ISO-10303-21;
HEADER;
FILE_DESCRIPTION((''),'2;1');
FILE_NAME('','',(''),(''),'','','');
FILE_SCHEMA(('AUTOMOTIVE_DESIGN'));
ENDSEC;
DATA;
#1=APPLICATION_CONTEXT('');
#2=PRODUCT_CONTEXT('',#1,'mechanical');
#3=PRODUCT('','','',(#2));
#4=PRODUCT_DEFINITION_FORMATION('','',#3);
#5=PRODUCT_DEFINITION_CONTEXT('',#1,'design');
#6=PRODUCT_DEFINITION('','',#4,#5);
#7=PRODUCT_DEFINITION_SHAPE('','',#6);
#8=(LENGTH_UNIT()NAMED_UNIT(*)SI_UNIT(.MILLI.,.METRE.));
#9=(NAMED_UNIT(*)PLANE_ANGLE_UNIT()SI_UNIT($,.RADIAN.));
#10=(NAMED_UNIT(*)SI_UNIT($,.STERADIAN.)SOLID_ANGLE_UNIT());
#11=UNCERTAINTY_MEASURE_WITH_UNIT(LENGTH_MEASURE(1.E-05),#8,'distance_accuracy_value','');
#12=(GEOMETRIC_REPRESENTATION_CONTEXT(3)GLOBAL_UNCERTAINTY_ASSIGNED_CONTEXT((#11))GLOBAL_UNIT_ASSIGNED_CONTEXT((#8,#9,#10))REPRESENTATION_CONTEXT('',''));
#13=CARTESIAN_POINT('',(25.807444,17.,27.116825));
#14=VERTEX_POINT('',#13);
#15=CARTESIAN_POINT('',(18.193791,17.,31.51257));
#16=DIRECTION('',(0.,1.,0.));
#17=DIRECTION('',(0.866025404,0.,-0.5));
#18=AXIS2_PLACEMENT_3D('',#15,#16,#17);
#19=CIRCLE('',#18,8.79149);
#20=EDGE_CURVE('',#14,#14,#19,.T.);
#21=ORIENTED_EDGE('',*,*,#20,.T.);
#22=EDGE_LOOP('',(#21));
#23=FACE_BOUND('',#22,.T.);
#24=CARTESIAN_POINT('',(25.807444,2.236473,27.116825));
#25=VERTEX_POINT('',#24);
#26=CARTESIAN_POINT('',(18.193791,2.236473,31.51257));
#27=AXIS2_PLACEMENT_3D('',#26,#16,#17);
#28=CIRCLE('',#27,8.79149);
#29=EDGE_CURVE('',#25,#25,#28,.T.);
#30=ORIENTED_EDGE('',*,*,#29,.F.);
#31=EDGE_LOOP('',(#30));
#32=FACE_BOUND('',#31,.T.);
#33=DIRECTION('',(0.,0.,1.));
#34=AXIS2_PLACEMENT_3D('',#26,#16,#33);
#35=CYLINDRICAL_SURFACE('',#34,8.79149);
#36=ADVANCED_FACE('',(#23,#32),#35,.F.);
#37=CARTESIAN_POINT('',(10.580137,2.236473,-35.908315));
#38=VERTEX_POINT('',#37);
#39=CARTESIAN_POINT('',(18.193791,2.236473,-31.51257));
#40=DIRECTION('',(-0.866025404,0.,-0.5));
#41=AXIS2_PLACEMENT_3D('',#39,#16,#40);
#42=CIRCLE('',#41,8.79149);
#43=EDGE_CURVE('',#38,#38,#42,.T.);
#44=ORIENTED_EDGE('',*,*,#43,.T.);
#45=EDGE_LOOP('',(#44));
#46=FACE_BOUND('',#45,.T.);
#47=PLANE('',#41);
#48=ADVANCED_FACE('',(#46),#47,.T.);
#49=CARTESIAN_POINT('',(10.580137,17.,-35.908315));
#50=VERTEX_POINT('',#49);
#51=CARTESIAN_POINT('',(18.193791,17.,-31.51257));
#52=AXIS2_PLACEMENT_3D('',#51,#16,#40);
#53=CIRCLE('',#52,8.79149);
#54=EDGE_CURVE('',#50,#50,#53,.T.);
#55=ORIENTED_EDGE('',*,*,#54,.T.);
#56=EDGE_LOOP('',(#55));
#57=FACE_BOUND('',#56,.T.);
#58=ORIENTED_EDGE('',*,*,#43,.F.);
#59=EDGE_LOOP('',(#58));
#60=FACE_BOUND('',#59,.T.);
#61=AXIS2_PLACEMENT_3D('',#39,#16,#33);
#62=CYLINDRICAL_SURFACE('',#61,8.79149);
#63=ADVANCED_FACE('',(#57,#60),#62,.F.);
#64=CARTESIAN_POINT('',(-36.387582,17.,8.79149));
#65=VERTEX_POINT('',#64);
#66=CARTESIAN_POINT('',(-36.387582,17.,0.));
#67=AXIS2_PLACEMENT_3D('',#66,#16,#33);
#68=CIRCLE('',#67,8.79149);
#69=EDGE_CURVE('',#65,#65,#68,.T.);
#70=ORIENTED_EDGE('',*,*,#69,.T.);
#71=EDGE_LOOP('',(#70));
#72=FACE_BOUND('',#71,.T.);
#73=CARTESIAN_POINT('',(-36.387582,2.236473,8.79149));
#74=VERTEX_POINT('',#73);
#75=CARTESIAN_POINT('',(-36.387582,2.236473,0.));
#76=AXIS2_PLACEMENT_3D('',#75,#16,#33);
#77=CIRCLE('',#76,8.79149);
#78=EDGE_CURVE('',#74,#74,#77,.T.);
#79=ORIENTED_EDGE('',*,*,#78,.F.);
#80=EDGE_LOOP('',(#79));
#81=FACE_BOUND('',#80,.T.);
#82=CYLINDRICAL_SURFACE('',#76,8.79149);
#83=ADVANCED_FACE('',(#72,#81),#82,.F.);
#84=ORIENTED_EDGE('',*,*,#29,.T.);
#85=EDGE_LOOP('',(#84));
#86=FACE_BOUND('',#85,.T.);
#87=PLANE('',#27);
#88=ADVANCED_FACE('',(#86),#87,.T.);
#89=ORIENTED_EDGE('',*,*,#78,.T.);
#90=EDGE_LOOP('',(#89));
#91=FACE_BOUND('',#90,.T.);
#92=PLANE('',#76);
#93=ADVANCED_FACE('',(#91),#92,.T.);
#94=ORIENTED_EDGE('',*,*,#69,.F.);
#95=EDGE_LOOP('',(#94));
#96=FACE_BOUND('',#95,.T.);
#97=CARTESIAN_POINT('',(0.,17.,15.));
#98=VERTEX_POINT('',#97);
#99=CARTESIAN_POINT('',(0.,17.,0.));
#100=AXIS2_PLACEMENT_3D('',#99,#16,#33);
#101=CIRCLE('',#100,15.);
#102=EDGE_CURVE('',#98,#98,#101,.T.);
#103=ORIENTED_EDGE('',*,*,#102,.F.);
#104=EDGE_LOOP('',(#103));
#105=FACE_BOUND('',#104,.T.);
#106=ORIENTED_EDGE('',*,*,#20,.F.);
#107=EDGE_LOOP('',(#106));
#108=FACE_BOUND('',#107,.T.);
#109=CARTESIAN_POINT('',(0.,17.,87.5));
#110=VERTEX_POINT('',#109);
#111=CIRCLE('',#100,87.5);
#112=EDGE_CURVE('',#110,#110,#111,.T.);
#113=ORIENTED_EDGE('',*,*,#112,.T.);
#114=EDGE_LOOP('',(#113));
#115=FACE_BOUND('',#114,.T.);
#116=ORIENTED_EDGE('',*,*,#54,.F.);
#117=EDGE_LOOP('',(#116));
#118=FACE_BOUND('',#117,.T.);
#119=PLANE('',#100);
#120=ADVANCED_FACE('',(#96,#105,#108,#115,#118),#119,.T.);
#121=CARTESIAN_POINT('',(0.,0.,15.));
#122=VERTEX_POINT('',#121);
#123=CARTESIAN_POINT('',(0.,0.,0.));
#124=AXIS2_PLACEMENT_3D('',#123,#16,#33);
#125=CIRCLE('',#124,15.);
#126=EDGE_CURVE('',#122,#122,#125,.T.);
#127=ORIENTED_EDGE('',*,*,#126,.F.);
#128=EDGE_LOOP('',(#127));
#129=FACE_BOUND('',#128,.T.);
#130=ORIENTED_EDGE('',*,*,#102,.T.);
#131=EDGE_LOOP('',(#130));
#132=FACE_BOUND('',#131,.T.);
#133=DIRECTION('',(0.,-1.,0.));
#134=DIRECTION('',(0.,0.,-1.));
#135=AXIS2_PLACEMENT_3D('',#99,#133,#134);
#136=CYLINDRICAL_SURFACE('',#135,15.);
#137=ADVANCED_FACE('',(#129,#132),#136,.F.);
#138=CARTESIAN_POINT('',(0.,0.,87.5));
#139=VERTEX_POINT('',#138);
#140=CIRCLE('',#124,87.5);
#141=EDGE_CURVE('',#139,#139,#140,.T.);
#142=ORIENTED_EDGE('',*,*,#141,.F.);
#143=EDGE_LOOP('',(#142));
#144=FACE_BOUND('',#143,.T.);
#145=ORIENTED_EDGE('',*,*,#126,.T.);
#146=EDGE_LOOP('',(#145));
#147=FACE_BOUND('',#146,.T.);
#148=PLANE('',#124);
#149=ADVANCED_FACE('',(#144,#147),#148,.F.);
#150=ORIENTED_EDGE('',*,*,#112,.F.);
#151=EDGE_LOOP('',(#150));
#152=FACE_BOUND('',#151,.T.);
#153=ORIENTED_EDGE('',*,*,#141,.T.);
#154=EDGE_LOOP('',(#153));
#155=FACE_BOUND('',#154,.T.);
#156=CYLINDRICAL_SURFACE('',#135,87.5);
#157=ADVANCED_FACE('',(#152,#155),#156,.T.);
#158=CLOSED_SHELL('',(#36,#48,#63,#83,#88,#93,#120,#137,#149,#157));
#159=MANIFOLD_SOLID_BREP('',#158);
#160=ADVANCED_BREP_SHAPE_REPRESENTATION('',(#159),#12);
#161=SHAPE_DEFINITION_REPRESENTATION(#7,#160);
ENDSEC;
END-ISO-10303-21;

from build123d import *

# Parameters (mm, degrees)
SKETCH1_R           = 87.5
BOSS_EXTRUDE1_DEPTH = 17
SKETCH2_R           = 15
CUT_EXTRUDE1_DEPTH  = 125.905964629
SKETCH3_R           = 8.791489872
CUT_EXTRUDE2_DEPTH  = 14.763526788
CIRPATTERN1_COUNT   = 3


with BuildPart() as part:
    # Sketch1 → Boss-Extrude1 (new body)
    with BuildSketch(Plane(origin=(0, 0, 0), x_dir=(1, 0, 0), z_dir=(0, 1, 0))):
        Circle(SKETCH1_R)
    extrude(amount=BOSS_EXTRUDE1_DEPTH)

    # Sketch2 → Cut-Extrude1 (cut, through all)
    with BuildSketch(Plane(origin=(0, 0, 0), x_dir=(1, 0, 0), z_dir=(0, 1, 0))):
        Circle(SKETCH2_R)
    extrude(amount=CUT_EXTRUDE1_DEPTH, mode=Mode.SUBTRACT)

    # Sketch3 → Cut-Extrude2 (cut)
    with BuildSketch(Plane(origin=(0, 17, 0), x_dir=(1, 0, 0), z_dir=(0, 1, 0))):
        with Locations((-36.387581524, 0)):
            Circle(SKETCH3_R)
    cut_extrude2 = extrude(amount=-CUT_EXTRUDE2_DEPTH, mode=Mode.SUBTRACT)

    # CirPattern1: Cut-Extrude2 ×3 about axis
    cirpattern1_axis = Axis((0, 0, 0), (0, 1, 0))
    for i in range(1, CIRPATTERN1_COUNT):
        add(cut_extrude2.rotate(cirpattern1_axis, i * 360 / CIRPATTERN1_COUNT), mode=Mode.SUBTRACT)


solid = part.part
